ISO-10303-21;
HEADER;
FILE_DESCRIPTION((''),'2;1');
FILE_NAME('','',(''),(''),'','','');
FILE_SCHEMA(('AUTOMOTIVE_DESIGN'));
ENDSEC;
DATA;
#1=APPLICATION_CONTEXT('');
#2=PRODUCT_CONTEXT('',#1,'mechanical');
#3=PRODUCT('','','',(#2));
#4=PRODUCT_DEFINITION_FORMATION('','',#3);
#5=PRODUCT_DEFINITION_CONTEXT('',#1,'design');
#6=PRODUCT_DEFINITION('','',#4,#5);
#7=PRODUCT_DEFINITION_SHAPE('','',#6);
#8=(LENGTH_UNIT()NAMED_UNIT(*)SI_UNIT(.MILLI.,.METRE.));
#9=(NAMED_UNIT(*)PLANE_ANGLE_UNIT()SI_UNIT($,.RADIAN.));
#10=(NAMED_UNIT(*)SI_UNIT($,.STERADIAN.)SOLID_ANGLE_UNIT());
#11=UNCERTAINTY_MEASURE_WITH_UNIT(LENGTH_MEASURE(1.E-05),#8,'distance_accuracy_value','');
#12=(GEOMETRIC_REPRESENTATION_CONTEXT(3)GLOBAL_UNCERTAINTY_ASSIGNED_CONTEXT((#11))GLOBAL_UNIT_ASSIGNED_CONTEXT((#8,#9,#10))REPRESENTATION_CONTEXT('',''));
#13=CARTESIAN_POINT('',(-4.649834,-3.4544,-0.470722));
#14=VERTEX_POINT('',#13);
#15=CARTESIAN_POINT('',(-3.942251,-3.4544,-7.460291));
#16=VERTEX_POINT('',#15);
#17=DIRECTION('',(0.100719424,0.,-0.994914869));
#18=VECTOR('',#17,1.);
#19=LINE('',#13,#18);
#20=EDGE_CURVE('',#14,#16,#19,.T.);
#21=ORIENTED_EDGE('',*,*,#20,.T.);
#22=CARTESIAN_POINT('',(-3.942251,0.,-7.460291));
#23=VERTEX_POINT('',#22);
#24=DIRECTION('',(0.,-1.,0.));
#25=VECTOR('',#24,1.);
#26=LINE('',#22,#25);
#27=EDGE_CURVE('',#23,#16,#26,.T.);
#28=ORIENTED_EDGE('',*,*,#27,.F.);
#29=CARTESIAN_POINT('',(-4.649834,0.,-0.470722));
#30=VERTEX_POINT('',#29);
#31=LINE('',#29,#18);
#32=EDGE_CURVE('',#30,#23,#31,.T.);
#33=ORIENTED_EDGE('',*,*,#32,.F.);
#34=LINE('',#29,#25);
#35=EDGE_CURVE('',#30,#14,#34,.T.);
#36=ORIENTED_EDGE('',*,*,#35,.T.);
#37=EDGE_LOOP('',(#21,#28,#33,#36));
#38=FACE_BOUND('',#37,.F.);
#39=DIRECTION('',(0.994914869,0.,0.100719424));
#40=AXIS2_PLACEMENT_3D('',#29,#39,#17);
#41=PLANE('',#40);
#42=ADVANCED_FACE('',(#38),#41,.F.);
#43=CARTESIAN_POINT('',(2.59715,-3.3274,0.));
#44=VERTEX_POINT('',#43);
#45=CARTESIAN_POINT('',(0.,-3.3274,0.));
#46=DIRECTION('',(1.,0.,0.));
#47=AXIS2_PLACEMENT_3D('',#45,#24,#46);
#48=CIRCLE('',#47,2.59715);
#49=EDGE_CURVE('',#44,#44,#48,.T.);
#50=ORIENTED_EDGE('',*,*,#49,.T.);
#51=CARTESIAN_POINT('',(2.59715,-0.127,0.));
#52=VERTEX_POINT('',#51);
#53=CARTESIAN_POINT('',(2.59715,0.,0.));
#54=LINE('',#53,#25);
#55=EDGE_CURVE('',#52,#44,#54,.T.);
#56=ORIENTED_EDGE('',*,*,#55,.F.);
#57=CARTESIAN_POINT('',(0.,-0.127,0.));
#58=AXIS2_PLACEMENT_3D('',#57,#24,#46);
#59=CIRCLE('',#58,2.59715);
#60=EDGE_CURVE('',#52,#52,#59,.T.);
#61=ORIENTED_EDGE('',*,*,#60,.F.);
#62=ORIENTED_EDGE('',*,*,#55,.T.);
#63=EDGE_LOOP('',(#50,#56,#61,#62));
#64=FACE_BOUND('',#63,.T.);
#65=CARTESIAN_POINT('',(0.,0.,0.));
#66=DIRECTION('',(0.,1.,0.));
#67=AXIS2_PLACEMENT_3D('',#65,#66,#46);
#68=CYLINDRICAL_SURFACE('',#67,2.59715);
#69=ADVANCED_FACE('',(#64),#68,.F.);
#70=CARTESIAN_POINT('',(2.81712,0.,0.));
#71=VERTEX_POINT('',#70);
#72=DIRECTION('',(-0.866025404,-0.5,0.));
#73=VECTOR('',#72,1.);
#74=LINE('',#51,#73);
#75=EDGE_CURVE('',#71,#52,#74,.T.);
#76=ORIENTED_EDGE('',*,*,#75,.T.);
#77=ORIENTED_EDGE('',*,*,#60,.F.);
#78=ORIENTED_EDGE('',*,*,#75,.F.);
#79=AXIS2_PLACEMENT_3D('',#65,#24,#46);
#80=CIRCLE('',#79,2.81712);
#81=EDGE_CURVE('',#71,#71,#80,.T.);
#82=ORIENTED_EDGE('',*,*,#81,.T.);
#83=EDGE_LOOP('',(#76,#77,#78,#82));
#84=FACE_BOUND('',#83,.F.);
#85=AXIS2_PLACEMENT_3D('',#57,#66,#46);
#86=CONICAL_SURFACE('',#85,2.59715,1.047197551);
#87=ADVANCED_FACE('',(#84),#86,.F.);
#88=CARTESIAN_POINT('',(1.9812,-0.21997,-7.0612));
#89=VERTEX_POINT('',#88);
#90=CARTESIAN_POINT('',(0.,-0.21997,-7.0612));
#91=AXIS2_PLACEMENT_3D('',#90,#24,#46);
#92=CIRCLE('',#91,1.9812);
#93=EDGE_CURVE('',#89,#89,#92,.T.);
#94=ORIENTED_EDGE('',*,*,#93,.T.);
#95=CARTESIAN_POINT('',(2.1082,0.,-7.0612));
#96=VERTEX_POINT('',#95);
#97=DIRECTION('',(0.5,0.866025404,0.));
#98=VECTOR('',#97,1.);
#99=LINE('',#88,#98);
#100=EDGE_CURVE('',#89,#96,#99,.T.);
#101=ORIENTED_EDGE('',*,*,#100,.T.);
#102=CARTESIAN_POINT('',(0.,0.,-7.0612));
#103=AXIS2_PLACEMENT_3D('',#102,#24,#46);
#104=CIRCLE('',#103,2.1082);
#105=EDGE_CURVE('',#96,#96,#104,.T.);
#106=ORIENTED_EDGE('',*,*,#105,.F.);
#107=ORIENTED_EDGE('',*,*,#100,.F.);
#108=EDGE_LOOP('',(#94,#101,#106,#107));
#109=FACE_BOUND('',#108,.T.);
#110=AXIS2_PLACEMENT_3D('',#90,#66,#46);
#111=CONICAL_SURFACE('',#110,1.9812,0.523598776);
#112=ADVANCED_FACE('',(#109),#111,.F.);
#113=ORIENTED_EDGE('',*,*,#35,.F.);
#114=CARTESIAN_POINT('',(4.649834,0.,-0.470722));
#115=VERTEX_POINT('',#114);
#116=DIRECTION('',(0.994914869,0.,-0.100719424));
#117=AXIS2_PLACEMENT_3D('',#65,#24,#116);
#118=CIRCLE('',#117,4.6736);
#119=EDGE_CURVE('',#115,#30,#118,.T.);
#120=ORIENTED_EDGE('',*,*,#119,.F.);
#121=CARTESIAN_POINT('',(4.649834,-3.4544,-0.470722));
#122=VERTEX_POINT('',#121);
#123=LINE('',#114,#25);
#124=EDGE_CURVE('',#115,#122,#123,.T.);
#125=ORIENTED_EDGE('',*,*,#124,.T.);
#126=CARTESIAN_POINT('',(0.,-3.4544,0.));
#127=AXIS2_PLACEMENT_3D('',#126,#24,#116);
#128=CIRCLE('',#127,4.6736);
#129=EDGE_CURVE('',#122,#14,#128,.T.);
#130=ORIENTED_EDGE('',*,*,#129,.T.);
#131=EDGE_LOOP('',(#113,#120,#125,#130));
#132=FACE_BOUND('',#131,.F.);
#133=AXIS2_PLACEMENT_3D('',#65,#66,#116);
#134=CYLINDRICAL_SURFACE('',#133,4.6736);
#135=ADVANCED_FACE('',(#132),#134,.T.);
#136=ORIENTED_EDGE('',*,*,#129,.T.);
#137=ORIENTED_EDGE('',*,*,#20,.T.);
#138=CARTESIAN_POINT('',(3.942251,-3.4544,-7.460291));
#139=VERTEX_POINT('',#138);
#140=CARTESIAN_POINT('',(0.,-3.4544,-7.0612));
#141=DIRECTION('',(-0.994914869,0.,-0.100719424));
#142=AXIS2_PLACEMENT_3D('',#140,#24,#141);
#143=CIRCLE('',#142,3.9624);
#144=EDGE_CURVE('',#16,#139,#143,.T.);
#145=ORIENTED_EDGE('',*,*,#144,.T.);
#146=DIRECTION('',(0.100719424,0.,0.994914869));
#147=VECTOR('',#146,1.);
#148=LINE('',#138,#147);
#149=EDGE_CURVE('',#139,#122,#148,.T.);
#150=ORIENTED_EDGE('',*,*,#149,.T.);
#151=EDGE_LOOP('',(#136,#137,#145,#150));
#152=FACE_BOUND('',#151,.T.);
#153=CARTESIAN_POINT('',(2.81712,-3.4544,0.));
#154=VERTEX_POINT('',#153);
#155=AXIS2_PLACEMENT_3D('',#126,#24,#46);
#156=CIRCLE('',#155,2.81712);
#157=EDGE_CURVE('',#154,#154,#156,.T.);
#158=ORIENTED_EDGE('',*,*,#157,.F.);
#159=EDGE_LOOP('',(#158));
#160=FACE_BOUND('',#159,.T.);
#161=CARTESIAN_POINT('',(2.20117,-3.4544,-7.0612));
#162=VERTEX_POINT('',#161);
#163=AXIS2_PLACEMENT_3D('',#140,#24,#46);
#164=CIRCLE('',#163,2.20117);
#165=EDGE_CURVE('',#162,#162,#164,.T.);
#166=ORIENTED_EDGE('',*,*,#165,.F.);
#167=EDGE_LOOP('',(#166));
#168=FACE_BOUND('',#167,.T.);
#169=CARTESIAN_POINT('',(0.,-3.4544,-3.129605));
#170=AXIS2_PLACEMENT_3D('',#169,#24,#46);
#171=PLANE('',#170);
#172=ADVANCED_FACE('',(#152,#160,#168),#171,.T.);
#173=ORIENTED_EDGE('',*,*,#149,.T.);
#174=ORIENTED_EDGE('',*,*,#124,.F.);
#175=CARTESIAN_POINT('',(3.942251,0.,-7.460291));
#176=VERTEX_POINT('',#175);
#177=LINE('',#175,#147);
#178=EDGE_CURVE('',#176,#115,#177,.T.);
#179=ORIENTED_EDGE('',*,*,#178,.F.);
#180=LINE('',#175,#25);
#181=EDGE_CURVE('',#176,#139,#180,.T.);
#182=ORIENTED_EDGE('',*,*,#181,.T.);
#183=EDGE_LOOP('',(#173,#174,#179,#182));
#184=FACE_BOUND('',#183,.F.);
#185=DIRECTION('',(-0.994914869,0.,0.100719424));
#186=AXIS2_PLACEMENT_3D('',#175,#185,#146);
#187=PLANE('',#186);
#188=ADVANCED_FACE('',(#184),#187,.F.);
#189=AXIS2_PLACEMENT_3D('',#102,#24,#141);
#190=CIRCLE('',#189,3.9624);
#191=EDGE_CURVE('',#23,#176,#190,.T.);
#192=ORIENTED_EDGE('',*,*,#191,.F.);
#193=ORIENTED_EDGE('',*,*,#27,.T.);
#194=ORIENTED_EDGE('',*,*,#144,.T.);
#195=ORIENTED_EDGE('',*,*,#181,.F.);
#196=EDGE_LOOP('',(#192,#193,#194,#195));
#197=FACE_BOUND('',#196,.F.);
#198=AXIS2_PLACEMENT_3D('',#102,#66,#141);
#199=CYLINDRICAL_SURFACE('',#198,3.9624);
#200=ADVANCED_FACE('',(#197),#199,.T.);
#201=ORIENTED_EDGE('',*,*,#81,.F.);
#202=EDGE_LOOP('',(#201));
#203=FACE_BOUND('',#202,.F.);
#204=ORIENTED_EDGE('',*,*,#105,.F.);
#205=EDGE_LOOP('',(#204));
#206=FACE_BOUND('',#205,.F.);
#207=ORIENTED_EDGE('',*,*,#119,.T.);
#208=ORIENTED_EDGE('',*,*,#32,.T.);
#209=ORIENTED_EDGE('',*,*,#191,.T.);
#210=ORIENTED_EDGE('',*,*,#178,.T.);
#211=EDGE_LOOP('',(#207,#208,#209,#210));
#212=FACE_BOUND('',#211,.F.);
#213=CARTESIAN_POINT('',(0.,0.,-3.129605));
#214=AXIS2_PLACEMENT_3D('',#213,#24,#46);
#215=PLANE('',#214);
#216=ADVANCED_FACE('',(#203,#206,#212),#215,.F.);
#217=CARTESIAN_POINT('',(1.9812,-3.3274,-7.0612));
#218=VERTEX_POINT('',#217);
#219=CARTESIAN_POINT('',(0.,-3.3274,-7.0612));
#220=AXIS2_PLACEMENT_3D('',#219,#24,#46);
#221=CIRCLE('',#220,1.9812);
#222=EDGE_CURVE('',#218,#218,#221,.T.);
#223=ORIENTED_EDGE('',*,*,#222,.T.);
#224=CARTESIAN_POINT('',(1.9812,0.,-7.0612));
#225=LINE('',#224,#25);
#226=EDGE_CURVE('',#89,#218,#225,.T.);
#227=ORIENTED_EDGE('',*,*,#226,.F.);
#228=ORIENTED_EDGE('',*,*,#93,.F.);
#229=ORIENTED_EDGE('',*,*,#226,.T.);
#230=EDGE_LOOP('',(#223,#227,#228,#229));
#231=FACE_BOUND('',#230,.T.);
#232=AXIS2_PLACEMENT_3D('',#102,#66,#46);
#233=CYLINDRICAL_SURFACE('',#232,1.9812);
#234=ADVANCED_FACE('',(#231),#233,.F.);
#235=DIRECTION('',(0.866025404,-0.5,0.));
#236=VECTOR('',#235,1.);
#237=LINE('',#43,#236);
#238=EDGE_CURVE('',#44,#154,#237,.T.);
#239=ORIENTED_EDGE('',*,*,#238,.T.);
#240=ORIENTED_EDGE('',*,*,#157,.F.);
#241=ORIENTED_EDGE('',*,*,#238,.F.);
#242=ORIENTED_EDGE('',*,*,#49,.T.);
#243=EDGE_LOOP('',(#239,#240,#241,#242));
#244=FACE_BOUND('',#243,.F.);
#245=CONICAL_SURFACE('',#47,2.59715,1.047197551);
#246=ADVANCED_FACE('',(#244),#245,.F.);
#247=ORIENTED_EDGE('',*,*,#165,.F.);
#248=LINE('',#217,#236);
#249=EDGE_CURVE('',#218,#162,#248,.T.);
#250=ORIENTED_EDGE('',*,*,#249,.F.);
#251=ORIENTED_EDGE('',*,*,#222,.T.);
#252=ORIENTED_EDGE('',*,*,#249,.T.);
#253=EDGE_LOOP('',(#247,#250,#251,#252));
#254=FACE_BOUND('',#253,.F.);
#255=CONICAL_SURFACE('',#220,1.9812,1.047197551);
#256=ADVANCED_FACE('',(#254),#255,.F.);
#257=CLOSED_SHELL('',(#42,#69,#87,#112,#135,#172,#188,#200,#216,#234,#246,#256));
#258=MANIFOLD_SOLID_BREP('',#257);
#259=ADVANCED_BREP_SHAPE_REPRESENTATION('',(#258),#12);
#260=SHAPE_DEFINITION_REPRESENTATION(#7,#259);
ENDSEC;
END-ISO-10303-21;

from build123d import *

# Parameters (mm, degrees)
F0_R        = 1.9812
F0_R_2      = 2.59715
F1_DEPTH    = 3.4544
F2_C1_SIZE2 = 0.127
F2_C1_SIZE  = 0.2199704526
F2_C2_SIZE2 = 0.2199704526
F2_C2_SIZE  = 0.127
F2_C3_SIZE2 = 0.127
F2_C3_SIZE  = 0.2199704526
F2_C4_SIZE2 = 0.2199704526
F2_C4_SIZE  = 0.127


with BuildPart() as f1:
    # F0 (on Front) → F1 (new body)
    with BuildSketch(Plane.XZ):
        with BuildLine():
            Line((-4.6498341341, -0.4707223022), (-3.9422506789, -7.4602906475))
            ThreePointArc((-3.9422506789, -7.4602906475), (0, -11.0236), (3.9422506789, -7.4602906475))
            Line((3.9422506789, -7.4602906475), (4.6498341341, -0.4707223022))
            ThreePointArc((4.6498341341, -0.4707223022), (0, 4.6736), (-4.6498341341, -0.4707223022))
        make_face()
        with Locations((0, -7.0612)):
            Circle(F0_R, mode=Mode.SUBTRACT)
        Circle(F0_R_2, mode=Mode.SUBTRACT)
    extrude(amount=F1_DEPTH)

    # F2: chamfer of 0.127 x 0.2199704526 on 4 edges, made by hand

    # F2_c1
    f2_c1_edges = [f1.edges().sort_by_distance(p)[0] for p in [
        (-1.9812, 0, -7.0612),
    ]]
    f2_c1_side = f1.faces().sort_by_distance((-1.9812, -0.00254, -7.0612))[0]
    chamfer(f2_c1_edges, length=F2_C1_SIZE, length2=F2_C1_SIZE2, reference=f2_c1_side)

    # F2_c2
    f2_c2_edges = [f1.edges().sort_by_distance(p)[0] for p in [
        (-1.9812, -3.4544, -7.0612),
    ]]
    f2_c2_side = f1.faces().sort_by_distance((-1.9812, -3.45186, -7.0612))[0]
    chamfer(f2_c2_edges, length=F2_C2_SIZE, length2=F2_C2_SIZE2, reference=f2_c2_side)

    # F2_c3
    f2_c3_edges = [f1.edges().sort_by_distance(p)[0] for p in [
        (-2.59715, 0, 0),
    ]]
    f2_c3_side = f1.faces().sort_by_distance((-2.59969, 0, 0))[0]
    chamfer(f2_c3_edges, length=F2_C3_SIZE, length2=F2_C3_SIZE2, reference=f2_c3_side)

    # F2_c4
    f2_c4_edges = [f1.edges().sort_by_distance(p)[0] for p in [
        (-2.59715, -3.4544, 0),
    ]]
    f2_c4_side = f1.faces().sort_by_distance((-2.59715, -3.45186, 0))[0]
    chamfer(f2_c4_edges, length=F2_C4_SIZE, length2=F2_C4_SIZE2, reference=f2_c4_side)


solid = f1.part
